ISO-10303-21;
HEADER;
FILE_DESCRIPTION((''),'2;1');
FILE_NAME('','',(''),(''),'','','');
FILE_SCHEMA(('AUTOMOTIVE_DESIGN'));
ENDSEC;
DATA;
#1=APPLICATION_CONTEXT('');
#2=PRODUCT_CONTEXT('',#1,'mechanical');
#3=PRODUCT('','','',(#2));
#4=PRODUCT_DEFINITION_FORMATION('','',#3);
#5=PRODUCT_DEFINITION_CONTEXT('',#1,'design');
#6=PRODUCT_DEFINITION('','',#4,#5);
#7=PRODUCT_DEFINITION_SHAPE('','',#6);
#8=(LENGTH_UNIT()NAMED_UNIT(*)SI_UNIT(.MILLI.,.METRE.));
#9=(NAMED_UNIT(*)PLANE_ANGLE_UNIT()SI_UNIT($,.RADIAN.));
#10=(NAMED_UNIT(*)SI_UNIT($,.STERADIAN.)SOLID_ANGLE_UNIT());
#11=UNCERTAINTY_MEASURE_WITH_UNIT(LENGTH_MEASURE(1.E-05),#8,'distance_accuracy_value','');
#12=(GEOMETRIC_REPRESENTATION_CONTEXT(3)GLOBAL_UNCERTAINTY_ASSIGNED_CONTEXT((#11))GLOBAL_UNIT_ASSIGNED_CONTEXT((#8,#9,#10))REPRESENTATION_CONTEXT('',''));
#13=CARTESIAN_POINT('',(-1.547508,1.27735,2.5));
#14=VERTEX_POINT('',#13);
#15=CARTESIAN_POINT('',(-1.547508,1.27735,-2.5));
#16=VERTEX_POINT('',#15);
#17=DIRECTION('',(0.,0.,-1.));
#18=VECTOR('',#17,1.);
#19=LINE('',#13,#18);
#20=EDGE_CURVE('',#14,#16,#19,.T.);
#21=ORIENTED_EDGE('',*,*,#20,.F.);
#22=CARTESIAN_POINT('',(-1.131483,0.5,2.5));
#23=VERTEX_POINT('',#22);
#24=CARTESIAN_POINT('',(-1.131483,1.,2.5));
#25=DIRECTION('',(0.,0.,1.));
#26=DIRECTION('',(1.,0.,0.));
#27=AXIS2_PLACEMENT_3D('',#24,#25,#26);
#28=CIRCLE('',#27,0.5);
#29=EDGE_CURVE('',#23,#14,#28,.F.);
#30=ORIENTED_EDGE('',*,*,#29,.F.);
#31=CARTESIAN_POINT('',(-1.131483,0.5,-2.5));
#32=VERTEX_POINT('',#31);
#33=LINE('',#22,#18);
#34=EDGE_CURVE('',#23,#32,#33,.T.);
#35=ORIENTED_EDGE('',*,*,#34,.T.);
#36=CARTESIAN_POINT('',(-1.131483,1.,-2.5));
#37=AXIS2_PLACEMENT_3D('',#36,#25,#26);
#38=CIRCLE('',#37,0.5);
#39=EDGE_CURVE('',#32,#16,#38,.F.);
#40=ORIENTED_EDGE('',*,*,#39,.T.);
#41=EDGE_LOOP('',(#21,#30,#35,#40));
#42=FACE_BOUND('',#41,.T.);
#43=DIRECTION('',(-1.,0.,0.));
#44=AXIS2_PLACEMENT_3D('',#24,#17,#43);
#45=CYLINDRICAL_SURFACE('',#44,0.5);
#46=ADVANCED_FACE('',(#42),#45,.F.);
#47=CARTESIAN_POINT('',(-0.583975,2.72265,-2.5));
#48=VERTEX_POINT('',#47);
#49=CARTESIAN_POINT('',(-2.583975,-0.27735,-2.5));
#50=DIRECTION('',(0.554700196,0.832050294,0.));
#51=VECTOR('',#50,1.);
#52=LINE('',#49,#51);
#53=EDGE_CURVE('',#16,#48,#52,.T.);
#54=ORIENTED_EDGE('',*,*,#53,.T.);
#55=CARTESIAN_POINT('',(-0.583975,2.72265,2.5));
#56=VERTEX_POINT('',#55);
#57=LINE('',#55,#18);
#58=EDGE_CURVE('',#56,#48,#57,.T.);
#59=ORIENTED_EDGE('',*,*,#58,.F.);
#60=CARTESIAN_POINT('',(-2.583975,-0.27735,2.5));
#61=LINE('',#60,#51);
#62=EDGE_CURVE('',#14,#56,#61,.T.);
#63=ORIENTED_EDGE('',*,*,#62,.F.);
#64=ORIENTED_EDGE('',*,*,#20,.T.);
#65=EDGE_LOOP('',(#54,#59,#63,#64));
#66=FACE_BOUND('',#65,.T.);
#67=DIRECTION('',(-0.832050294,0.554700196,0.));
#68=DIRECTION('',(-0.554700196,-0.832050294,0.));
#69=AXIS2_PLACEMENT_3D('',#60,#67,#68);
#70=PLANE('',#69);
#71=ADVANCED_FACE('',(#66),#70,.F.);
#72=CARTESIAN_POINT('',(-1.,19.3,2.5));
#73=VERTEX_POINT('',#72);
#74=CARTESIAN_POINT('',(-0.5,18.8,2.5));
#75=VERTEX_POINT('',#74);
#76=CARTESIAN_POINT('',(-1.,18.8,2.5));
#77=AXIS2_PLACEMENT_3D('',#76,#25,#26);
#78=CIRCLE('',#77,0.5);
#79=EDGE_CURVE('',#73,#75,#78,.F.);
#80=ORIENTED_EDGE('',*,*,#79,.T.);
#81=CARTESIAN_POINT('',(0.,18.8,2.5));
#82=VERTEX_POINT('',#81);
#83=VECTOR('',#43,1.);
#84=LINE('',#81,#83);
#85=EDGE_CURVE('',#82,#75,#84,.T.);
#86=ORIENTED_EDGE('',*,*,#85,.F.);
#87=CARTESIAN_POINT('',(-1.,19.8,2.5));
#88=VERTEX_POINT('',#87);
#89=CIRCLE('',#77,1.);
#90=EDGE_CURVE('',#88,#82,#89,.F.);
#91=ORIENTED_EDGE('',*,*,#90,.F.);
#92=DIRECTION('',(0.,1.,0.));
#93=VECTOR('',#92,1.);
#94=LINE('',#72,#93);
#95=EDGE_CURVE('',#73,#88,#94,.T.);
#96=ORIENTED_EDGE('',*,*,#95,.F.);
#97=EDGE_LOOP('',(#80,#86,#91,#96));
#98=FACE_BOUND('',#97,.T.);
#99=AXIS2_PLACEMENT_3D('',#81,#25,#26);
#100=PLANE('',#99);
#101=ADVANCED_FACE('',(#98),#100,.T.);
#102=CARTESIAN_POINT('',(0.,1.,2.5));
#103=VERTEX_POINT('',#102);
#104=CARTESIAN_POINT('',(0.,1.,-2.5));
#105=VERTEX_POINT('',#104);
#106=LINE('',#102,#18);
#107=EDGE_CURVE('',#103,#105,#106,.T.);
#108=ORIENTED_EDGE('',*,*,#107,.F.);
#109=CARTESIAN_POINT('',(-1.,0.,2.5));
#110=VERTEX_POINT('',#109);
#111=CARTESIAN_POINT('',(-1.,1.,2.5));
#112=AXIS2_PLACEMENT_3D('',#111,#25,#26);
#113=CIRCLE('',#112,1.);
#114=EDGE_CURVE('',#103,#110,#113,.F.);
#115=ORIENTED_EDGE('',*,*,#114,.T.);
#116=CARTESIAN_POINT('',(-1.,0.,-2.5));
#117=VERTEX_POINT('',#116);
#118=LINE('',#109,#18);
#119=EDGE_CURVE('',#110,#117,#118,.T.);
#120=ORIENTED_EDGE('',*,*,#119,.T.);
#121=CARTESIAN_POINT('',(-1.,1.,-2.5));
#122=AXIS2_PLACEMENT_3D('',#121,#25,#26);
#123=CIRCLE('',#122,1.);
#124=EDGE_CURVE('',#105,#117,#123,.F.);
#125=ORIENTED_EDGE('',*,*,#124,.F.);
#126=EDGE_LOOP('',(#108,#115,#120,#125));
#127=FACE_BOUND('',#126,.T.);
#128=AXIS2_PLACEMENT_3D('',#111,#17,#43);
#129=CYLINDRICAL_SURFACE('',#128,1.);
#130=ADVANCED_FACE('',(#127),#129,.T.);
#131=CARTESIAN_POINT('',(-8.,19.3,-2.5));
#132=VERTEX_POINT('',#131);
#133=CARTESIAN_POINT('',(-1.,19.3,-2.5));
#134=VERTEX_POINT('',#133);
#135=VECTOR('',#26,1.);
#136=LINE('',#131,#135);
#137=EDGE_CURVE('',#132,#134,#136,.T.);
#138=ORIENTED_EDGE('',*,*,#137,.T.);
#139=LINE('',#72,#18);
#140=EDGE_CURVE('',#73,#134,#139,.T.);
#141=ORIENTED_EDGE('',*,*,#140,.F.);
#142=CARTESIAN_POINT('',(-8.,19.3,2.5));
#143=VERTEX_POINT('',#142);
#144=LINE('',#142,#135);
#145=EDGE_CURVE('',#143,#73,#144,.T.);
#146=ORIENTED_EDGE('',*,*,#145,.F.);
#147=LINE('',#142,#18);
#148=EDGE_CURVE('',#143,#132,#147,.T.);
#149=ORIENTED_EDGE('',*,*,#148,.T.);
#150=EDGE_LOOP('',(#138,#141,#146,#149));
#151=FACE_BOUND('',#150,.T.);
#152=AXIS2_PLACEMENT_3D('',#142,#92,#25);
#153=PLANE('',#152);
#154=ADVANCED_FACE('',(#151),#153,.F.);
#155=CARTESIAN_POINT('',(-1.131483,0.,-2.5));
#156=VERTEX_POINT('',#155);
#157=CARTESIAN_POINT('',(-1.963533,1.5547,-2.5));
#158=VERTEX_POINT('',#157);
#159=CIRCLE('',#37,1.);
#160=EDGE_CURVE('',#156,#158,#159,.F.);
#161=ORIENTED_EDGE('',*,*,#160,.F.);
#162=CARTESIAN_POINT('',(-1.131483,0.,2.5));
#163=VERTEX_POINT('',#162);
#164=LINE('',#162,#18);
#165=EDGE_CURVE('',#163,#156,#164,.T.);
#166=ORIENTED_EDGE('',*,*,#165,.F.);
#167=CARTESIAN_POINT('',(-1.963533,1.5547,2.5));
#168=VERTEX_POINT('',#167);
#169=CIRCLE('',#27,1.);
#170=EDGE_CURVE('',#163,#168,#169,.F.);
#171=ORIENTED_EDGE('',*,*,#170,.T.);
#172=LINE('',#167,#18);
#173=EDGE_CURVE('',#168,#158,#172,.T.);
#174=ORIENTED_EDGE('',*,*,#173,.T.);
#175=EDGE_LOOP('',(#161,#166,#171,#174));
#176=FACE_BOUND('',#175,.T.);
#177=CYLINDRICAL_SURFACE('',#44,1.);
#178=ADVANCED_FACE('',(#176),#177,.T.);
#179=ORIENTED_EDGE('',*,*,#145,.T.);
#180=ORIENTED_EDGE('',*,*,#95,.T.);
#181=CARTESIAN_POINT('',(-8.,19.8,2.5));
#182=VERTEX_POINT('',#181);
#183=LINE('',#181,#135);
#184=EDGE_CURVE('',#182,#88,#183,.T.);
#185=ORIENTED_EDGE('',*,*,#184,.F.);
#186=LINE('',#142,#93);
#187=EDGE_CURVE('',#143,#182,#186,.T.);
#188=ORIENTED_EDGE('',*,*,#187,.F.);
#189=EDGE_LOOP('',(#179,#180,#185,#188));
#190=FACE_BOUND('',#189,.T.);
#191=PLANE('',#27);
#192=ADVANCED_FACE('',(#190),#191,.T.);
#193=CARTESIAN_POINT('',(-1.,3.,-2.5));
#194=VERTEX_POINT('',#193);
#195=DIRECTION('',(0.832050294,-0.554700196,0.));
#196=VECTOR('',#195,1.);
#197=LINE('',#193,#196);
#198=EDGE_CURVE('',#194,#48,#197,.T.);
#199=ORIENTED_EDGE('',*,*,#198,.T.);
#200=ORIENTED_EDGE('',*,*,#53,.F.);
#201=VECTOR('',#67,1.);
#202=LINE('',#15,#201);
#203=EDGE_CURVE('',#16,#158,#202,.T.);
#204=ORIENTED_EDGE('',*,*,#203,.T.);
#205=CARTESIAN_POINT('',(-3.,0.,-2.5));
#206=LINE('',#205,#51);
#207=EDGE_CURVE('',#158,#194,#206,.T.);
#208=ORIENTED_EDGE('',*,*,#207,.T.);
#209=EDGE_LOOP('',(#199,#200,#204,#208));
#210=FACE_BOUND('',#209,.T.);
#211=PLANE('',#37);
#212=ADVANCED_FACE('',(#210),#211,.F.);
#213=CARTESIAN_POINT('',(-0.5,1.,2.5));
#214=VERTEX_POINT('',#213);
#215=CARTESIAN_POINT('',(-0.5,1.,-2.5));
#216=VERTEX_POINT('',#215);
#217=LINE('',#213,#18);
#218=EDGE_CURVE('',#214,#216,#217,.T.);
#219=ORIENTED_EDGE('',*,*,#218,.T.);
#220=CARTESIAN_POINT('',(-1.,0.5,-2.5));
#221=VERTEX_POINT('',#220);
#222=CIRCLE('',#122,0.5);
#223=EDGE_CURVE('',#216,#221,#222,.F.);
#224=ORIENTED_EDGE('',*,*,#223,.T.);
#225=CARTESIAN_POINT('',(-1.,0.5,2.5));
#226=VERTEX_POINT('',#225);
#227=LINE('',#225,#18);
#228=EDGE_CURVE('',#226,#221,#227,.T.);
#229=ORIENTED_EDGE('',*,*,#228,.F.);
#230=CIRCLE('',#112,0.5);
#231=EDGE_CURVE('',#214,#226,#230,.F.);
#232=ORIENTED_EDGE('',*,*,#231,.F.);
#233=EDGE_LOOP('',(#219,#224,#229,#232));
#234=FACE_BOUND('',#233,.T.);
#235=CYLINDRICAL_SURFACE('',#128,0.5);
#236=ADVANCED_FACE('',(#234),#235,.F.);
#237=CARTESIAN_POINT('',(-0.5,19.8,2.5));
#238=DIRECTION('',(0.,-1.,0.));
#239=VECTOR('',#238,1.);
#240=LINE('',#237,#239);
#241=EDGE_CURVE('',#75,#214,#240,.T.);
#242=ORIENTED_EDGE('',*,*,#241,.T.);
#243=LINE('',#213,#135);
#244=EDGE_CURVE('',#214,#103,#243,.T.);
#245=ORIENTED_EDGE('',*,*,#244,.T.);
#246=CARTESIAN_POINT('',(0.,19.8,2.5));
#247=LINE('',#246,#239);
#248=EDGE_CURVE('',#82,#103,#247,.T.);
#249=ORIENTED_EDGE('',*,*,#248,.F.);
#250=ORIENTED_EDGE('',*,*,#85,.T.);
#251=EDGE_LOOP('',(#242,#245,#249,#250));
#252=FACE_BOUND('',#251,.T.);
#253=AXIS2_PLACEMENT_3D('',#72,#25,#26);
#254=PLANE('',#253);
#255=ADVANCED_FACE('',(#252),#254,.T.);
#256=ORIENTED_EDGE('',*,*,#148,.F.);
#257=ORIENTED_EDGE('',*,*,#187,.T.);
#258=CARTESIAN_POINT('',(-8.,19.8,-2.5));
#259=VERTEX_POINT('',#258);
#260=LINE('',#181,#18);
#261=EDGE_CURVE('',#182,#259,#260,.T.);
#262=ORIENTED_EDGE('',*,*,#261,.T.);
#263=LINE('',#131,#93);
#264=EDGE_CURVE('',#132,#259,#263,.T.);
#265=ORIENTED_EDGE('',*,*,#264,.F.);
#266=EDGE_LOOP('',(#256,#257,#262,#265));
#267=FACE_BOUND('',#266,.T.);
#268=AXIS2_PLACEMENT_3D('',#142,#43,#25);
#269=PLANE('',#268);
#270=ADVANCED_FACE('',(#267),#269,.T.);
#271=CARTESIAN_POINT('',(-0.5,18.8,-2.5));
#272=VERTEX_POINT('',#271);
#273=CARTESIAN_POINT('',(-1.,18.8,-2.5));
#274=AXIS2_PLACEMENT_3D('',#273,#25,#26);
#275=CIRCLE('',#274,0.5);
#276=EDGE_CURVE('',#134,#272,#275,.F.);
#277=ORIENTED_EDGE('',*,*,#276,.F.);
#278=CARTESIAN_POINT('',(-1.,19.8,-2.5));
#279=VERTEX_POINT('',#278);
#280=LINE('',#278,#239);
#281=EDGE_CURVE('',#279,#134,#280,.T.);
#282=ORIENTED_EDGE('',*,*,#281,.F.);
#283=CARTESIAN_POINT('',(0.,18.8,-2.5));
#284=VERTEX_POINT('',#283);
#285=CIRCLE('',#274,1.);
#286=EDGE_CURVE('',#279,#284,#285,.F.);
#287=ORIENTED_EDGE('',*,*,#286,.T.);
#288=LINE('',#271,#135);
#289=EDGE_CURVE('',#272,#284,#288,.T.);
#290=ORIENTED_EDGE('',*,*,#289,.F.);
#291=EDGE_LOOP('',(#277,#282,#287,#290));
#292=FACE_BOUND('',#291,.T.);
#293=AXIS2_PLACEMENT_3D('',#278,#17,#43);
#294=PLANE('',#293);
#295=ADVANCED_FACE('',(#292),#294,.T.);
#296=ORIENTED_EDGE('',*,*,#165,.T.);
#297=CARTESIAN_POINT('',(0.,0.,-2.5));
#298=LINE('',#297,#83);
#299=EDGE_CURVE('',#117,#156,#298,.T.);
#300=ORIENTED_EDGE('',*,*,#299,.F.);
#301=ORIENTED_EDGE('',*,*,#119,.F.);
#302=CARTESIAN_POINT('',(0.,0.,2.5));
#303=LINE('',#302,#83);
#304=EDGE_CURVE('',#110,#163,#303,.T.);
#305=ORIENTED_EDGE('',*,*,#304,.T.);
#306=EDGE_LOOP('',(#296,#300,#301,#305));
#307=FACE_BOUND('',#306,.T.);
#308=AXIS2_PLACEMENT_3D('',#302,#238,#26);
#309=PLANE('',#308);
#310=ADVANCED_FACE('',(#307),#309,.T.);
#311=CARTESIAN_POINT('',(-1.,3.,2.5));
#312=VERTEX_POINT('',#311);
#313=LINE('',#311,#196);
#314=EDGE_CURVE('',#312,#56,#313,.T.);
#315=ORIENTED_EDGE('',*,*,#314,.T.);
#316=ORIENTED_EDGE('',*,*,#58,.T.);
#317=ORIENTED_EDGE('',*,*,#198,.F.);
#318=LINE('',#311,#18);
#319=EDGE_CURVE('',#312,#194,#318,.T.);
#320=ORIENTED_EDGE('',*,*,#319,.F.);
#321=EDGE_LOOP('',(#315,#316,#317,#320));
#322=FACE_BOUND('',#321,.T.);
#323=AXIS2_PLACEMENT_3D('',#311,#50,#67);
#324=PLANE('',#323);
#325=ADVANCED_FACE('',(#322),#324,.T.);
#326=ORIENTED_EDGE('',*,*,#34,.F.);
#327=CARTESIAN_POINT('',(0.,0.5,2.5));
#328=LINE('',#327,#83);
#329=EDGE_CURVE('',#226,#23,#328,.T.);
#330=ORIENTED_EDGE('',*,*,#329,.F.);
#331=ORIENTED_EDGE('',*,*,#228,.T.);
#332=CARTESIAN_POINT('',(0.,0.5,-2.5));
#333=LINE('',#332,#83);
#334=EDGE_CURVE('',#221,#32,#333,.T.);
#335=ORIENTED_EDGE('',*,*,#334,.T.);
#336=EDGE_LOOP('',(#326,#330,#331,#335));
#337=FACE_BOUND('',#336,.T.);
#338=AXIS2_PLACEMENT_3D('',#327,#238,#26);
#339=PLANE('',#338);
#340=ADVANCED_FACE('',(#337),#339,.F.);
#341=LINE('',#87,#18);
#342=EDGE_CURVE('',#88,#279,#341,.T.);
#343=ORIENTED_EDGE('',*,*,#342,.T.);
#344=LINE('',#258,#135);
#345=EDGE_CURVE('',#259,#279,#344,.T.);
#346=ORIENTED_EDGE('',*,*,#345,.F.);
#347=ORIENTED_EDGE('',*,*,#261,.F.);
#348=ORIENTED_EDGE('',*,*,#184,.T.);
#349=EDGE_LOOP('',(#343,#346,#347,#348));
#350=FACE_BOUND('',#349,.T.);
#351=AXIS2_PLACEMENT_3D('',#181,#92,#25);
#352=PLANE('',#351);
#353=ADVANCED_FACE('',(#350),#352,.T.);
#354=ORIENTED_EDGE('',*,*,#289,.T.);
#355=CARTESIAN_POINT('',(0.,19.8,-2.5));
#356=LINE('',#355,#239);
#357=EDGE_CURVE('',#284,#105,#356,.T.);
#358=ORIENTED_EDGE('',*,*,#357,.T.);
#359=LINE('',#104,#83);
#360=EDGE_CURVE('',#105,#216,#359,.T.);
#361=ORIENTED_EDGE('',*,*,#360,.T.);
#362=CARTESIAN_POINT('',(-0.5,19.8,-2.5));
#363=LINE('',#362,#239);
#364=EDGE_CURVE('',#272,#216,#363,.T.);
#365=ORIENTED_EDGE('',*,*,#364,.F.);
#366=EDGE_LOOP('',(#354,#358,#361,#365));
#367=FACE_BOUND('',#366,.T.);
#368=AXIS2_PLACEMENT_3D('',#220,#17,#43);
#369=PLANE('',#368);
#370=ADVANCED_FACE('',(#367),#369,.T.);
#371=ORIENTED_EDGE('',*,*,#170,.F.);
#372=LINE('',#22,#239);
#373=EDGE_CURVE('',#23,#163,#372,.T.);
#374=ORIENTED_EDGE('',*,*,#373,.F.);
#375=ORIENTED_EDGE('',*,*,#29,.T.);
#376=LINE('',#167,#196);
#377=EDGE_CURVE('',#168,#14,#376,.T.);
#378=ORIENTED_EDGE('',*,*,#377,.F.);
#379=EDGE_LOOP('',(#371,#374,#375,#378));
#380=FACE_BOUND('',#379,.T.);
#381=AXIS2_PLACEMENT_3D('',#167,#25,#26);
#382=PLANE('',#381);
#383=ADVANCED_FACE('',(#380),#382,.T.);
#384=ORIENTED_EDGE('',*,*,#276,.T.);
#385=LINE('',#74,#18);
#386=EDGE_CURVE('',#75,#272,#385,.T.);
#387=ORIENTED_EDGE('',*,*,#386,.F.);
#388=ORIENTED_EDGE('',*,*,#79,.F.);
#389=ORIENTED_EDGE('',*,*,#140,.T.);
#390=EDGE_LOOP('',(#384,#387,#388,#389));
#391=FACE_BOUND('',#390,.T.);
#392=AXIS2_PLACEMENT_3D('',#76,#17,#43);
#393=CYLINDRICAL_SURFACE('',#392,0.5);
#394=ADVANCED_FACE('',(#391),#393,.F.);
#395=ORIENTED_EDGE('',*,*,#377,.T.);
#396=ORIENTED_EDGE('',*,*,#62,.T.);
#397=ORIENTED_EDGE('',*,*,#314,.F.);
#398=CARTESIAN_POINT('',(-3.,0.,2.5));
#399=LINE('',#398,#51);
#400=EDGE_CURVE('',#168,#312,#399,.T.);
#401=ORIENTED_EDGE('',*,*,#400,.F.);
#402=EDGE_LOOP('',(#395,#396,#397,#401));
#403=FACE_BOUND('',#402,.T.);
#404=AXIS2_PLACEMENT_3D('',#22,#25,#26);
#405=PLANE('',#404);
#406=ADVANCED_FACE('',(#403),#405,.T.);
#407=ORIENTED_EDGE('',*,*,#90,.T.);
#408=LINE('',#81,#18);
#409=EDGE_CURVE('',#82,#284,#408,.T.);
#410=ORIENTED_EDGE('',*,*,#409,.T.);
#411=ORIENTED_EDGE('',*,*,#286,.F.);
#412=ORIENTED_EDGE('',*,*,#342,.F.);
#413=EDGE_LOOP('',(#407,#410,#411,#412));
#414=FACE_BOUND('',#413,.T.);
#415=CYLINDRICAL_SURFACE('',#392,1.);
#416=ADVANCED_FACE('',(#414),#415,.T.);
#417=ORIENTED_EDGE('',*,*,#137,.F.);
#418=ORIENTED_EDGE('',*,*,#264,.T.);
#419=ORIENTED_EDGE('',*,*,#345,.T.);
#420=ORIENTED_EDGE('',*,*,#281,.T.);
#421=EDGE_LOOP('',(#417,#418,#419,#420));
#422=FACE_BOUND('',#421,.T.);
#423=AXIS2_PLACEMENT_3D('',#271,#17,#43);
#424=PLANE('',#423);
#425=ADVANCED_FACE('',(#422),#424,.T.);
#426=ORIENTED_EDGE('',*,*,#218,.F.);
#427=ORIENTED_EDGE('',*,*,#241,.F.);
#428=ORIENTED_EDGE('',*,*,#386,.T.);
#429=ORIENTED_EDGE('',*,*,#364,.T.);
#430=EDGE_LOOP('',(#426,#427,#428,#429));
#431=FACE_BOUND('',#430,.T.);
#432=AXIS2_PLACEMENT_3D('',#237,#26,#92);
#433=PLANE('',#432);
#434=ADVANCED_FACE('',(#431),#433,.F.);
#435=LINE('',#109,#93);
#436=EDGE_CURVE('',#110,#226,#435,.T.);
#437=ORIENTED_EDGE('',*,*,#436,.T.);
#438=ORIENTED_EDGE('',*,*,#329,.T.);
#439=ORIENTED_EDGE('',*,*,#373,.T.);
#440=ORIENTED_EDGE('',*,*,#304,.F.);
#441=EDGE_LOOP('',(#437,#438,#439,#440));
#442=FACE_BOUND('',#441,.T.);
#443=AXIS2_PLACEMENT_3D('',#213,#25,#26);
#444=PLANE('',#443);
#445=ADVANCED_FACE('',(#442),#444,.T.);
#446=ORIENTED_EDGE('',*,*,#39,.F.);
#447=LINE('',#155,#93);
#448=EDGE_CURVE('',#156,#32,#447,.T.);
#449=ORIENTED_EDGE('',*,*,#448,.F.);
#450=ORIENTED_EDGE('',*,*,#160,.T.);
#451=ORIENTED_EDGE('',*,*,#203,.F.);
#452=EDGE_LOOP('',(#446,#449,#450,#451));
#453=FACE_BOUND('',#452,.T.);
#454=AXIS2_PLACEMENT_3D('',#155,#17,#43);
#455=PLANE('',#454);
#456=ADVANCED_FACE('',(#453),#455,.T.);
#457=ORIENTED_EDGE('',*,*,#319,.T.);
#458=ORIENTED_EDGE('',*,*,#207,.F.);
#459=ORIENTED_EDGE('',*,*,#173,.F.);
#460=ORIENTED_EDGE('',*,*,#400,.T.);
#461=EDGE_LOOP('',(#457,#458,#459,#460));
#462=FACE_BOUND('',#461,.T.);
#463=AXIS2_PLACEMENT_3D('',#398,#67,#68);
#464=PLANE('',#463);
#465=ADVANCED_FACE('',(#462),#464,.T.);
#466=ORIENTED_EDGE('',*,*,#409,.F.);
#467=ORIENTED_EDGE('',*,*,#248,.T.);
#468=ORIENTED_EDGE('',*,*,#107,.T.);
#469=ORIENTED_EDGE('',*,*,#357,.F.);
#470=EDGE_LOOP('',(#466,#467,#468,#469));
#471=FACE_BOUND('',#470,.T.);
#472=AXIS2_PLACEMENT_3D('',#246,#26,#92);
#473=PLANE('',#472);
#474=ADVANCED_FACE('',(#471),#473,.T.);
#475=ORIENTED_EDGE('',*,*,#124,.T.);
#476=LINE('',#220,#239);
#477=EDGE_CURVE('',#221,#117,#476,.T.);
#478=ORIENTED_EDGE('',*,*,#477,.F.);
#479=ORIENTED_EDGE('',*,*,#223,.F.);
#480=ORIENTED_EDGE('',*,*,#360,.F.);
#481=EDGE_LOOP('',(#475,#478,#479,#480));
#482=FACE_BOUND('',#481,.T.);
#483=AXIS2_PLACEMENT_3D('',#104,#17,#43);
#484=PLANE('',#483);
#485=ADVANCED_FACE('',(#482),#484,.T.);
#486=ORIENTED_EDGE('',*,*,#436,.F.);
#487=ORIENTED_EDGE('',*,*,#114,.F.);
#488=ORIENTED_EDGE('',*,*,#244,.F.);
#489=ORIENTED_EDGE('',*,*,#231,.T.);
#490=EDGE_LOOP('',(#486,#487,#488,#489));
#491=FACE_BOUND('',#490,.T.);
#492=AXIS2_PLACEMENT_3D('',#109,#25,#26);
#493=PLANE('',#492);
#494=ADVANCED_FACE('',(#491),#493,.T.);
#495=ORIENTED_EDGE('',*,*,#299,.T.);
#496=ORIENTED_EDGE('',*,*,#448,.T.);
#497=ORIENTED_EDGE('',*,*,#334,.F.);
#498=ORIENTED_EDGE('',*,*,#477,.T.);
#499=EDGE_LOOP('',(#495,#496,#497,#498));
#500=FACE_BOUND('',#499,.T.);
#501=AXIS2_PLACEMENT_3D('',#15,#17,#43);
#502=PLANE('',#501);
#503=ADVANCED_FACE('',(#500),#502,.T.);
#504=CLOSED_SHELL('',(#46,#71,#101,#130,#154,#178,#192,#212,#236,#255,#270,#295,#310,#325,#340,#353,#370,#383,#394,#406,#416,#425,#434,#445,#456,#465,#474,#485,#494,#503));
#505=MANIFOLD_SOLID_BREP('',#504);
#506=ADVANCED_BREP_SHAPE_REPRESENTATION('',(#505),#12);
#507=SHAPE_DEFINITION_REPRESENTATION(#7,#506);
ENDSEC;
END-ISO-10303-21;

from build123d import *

# Parameters (mm, degrees)
BASE_FLANGE1_DEPTH = 2.5


# Sheet-metal steps are written as plain solids
with BuildPart() as part:
    # Sketch1 → Base-Flange1 (new, symmetric)
    with BuildSketch(Plane.XY):
        with BuildLine():
            Line((-8, 19.8), (-1, 19.8))
            ThreePointArc((-1, 19.8), (-0.292893219, 19.507106781), (0, 18.8))
            Line((0, 18.8), (0, 1))
            ThreePointArc((0, 1), (-0.292893219, 0.292893219), (-1, 0))
            Line((-1, 0), (-1.131482908, 0))
            ThreePointArc((-1.131482908, 0), (-2.013157507, 0.528142074), (-1.963533203, 1.554700196))
            Line((-1.963533203, 1.554700196), (-1, 3))
            Line((-1, 3), (-0.583974853, 2.722649902))
            Line((-0.583974853, 2.722649902), (-1.547508055, 1.277350098))
            ThreePointArc((-1.547508055, 1.277350098), (-1.572320208, 0.764071037), (-1.131482908, 0.5))
            Line((-1.131482908, 0.5), (-1, 0.5))
            ThreePointArc((-1, 0.5), (-0.646446609, 0.646446609), (-0.5, 1))
            Line((-0.5, 1), (-0.5, 18.8))
            ThreePointArc((-0.5, 18.8), (-0.646446609, 19.153553391), (-1, 19.3))
            Line((-1, 19.3), (-8, 19.3))
            Line((-8, 19.3), (-8, 19.8))
        make_face()
    extrude(amount=BASE_FLANGE1_DEPTH, both=True)


solid = part.part
